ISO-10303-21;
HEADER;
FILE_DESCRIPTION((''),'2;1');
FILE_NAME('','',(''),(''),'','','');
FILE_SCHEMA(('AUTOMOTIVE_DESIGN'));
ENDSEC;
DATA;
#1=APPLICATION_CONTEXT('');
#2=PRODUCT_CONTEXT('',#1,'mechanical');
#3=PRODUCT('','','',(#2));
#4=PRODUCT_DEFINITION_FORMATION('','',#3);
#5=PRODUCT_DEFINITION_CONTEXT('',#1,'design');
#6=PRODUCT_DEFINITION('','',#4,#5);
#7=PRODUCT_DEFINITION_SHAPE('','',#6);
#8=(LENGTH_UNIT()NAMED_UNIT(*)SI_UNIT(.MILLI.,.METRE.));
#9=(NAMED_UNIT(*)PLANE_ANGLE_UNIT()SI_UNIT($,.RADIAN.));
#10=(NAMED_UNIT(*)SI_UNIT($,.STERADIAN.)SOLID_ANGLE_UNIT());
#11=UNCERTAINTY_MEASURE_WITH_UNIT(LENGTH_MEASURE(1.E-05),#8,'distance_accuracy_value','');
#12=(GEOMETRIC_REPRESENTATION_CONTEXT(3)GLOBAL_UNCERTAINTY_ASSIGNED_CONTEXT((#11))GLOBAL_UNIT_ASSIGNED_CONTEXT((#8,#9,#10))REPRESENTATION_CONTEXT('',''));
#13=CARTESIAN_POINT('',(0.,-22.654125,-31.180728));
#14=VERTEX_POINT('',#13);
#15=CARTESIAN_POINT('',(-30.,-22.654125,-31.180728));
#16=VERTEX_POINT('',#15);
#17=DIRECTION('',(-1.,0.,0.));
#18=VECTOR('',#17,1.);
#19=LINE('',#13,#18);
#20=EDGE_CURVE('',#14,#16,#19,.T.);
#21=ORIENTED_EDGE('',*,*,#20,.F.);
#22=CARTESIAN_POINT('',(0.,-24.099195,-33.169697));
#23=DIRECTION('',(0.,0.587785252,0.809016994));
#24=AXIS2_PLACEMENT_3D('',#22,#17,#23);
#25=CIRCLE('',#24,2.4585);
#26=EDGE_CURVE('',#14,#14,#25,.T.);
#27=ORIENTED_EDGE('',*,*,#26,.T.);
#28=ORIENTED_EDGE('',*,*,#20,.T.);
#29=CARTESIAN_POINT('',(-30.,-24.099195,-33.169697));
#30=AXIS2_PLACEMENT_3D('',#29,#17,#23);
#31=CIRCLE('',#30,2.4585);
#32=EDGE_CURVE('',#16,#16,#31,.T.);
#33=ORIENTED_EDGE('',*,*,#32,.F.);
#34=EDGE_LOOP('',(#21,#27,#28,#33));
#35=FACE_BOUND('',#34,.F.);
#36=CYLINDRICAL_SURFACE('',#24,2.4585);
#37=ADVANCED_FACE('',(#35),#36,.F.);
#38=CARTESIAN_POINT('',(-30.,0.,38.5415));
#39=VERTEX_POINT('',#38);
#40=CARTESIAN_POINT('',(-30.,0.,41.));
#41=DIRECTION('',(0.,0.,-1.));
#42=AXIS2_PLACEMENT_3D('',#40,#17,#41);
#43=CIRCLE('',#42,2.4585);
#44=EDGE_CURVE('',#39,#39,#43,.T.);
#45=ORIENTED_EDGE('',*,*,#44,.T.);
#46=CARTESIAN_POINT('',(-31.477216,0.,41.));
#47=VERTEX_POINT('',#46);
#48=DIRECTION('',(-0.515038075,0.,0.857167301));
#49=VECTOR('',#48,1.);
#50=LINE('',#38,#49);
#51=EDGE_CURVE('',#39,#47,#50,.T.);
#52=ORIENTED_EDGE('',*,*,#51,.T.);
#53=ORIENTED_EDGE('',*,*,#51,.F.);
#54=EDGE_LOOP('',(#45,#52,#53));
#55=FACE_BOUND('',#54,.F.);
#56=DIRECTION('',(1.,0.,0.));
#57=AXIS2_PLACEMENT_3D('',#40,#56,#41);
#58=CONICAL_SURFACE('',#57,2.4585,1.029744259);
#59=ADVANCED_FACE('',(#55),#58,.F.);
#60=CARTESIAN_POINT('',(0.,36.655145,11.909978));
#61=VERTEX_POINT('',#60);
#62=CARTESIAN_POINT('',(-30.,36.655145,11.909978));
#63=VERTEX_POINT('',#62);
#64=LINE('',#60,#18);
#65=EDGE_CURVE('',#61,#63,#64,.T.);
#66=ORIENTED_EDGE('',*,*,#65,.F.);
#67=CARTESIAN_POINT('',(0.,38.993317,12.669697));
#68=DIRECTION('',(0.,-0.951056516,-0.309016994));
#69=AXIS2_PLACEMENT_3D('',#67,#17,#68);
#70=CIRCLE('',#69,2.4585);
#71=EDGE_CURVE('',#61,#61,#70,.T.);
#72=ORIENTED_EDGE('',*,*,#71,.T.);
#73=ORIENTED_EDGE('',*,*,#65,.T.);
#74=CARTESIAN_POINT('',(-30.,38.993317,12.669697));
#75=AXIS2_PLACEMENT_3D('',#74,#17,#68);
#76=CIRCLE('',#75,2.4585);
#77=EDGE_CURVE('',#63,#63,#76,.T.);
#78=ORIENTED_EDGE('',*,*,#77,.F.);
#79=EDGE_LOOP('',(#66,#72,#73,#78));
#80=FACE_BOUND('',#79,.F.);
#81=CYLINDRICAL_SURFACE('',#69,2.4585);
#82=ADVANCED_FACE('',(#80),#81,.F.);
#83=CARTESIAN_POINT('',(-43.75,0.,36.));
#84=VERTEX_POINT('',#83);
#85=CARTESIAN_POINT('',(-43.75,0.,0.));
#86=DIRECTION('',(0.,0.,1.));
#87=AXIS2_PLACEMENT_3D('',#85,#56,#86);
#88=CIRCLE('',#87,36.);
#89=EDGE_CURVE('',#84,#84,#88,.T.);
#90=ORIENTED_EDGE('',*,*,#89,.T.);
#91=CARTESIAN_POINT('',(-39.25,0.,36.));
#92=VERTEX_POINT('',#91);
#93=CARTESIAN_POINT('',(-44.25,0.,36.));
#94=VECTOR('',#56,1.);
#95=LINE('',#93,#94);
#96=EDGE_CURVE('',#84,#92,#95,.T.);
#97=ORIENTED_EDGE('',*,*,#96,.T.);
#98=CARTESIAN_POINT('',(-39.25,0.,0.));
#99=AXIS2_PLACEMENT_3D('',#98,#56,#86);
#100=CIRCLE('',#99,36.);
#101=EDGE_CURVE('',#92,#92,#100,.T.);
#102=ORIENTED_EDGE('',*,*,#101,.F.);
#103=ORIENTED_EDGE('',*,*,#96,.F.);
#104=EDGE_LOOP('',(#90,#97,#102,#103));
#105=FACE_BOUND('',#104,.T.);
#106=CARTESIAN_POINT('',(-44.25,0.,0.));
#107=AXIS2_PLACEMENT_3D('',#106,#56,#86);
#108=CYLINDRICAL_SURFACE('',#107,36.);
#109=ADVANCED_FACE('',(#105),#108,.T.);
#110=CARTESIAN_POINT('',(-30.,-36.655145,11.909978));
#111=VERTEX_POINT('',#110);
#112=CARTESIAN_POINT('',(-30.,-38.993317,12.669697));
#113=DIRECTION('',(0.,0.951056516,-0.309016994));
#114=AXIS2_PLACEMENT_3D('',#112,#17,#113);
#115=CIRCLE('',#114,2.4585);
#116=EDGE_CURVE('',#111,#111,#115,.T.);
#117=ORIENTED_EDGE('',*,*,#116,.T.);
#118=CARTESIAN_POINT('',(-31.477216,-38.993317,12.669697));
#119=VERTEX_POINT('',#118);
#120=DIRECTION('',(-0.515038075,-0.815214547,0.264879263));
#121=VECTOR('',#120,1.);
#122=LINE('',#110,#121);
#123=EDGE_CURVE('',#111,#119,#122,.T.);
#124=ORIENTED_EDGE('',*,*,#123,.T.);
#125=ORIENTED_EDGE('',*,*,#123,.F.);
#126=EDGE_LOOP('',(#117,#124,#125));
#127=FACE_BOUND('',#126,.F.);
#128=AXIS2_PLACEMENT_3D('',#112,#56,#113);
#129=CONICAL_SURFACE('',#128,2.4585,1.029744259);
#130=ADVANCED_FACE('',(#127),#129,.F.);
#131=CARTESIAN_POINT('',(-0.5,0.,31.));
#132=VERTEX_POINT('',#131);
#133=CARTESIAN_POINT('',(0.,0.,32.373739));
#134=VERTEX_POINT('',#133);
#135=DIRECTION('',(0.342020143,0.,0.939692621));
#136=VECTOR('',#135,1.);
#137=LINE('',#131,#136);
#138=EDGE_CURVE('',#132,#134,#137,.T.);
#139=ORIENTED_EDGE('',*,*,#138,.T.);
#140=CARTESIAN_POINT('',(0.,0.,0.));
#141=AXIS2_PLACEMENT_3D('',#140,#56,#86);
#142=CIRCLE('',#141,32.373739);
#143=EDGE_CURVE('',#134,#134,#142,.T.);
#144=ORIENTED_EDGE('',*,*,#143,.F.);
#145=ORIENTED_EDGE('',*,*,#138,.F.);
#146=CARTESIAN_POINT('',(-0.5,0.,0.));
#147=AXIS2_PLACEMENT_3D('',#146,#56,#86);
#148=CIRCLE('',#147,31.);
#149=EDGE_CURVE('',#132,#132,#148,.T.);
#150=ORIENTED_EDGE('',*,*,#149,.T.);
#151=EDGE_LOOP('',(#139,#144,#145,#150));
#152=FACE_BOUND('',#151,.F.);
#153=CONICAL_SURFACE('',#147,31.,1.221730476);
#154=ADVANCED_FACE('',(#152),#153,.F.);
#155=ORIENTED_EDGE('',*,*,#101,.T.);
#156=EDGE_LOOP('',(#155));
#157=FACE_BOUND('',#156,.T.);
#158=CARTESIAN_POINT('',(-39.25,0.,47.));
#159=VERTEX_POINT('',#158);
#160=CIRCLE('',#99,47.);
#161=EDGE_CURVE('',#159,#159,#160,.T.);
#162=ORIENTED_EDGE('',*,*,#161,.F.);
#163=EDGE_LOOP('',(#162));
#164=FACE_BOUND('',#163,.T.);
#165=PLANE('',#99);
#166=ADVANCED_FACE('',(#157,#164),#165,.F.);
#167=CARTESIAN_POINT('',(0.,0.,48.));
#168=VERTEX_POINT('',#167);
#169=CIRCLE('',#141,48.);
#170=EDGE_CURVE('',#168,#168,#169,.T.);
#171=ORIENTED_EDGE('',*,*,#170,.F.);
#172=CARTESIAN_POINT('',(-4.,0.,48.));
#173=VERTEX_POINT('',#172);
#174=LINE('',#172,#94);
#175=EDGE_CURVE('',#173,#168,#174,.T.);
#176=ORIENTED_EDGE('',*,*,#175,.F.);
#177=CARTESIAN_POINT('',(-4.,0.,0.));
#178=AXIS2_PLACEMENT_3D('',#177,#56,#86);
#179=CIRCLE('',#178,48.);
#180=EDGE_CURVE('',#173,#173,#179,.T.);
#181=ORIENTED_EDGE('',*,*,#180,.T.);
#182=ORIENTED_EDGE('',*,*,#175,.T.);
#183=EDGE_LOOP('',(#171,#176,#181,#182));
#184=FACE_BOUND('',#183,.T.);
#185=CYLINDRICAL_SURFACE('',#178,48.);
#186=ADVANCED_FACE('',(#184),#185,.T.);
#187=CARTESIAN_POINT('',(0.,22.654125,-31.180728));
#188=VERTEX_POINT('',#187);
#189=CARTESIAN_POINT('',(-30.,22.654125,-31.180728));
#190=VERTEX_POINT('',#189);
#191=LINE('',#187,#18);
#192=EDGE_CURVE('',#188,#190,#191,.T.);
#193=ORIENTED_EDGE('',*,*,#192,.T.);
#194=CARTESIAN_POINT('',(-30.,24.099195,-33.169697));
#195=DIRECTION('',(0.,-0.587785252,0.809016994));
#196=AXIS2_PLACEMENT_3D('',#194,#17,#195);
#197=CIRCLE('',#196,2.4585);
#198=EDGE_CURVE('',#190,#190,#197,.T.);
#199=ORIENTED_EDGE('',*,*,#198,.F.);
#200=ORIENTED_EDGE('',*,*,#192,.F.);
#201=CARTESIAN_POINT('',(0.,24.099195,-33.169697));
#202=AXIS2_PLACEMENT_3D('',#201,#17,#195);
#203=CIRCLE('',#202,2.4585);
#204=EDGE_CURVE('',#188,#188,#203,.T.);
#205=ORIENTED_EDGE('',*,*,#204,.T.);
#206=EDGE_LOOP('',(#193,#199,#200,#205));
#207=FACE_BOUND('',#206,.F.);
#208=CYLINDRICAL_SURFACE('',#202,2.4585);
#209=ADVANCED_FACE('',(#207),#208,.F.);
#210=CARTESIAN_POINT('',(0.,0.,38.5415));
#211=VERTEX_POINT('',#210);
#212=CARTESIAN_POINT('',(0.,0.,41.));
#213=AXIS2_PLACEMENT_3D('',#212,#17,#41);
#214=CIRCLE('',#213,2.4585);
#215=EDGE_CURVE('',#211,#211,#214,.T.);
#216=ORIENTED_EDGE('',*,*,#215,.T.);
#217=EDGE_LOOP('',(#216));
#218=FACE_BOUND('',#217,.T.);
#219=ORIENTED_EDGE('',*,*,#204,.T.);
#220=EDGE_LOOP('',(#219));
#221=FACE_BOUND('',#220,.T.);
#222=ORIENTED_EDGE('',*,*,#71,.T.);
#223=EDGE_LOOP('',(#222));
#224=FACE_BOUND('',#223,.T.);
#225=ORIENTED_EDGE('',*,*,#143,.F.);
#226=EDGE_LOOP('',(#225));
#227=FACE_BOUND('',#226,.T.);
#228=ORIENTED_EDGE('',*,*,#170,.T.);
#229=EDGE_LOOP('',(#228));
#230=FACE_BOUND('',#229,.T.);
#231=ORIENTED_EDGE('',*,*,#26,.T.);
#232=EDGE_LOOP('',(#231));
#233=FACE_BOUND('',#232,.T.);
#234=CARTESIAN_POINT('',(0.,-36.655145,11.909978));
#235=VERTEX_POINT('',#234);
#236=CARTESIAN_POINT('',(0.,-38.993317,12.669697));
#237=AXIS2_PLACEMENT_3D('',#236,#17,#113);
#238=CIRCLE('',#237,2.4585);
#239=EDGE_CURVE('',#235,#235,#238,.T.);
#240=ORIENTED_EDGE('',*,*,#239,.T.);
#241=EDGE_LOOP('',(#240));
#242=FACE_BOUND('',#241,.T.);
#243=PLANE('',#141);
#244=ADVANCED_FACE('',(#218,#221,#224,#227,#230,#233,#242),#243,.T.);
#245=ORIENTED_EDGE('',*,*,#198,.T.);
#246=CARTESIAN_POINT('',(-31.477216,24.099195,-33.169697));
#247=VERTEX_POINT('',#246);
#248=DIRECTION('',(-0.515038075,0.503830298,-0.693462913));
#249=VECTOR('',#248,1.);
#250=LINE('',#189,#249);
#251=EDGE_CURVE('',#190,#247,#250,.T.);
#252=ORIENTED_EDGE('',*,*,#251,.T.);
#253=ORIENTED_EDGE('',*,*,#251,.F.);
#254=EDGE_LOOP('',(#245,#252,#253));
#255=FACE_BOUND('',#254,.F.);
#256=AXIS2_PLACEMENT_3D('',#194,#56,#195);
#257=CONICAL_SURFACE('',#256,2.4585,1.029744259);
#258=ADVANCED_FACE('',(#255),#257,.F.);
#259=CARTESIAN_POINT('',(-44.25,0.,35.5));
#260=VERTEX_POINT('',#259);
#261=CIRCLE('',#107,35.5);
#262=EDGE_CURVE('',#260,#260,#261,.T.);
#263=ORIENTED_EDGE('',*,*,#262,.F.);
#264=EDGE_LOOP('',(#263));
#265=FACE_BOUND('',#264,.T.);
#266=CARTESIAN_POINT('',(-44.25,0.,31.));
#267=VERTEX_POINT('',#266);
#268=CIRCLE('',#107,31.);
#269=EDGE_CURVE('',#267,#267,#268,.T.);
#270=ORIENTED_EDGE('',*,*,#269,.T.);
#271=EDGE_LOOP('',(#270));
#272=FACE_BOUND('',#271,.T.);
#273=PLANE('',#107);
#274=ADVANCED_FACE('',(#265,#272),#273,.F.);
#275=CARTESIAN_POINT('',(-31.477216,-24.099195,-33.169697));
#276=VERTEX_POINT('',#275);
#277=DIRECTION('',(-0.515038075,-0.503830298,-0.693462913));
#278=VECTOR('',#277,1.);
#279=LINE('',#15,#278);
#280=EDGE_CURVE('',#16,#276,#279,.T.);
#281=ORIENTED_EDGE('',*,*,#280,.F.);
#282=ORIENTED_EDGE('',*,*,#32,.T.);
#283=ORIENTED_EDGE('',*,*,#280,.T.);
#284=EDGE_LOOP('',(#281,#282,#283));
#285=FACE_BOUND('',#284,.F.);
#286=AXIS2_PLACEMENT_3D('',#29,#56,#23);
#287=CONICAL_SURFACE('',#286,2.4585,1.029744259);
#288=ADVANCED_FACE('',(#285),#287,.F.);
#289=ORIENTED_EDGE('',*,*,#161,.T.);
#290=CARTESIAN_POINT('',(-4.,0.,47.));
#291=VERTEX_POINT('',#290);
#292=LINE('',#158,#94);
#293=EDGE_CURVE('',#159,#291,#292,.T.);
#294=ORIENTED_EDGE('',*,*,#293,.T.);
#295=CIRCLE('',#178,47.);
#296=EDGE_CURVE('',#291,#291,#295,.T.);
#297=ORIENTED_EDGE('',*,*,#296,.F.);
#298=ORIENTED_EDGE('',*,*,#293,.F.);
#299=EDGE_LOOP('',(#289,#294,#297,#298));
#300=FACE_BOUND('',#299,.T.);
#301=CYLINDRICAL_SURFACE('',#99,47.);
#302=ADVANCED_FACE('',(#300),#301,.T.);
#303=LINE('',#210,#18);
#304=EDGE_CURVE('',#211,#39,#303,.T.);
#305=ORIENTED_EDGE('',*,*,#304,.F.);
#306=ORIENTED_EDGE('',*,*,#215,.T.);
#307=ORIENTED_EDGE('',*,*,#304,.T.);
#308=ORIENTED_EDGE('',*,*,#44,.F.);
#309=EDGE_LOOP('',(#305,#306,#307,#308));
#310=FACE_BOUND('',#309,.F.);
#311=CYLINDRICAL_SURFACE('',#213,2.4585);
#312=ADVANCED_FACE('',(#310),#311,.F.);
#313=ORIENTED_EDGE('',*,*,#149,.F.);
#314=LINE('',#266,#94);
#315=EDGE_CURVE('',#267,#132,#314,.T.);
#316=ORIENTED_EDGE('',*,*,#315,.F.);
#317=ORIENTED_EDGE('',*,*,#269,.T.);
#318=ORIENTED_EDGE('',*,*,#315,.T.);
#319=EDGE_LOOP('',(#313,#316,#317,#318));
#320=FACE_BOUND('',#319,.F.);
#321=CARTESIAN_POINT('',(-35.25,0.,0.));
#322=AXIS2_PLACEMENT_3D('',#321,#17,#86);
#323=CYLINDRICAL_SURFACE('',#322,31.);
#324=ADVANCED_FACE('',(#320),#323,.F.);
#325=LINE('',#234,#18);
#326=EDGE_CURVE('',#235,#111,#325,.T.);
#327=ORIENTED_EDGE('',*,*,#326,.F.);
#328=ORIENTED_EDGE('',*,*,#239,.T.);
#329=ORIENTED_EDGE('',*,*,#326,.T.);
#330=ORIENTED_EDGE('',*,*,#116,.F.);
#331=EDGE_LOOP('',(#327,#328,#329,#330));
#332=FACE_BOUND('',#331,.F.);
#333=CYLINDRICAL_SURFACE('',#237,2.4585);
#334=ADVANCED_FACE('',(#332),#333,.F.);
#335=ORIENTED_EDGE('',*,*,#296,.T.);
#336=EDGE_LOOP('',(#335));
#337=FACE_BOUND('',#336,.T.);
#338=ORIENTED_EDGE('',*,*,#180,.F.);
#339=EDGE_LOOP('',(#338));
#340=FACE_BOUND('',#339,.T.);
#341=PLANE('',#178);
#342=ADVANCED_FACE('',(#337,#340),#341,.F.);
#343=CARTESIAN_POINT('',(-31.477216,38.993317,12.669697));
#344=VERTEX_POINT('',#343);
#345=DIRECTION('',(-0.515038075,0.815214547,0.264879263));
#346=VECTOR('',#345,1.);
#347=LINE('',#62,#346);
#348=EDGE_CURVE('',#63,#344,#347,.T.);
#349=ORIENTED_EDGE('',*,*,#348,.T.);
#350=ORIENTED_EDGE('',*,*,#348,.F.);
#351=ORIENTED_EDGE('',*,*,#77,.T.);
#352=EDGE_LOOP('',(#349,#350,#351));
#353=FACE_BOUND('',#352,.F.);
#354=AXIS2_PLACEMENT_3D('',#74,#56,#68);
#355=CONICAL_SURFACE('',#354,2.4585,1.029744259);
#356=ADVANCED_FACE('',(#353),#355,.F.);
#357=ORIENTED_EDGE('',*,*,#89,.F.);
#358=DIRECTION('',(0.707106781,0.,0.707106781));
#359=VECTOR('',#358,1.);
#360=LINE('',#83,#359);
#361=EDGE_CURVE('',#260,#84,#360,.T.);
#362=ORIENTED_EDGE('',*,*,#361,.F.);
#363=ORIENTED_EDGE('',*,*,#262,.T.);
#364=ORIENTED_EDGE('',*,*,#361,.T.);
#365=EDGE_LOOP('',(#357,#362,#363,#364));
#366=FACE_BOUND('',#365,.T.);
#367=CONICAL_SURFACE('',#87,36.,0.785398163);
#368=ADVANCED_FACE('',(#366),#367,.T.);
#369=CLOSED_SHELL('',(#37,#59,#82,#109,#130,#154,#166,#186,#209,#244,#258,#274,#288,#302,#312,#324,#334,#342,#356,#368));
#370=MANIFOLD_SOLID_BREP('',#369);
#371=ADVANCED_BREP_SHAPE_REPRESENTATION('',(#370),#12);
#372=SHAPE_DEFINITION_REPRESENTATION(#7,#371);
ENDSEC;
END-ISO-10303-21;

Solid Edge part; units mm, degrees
sketch "Sketch1" plane through (0, 0, 0) normal (0, -1, 0) x (1, 0, 0)
  line L0 (0, 31) -> (-35.25, 31)
  line L1 (-35.25, 31) -> (-44.25, 31)
  line L2 (-44.25, 31) -> (-44.25, 36)
  line L3 (-44.25, 36) -> (-39.25, 36)
  line L4 (-39.25, 36) -> (-39.25, 47)
  line L5 (-39.25, 47) -> (-4, 47)
  line L6 (-4, 47) -> (-4, 48)
  line L7 (-4, 48) -> (0, 48)
  line L8 (0, 48) -> (0, 31)
revolve "RevolvedProtrusion1" add sketch "Sketch1" angle 360 about axis through (0, 0, 0) along (1, 0, 0)
chamfer "Chamfer_2" [suppressed]
chamfer "Chamfer_3" distance 0.5 angle 45 1 edges at (-44.25, 0, -36)
hole "Hole_16" at (0, 0, 41) direction (-1, 0, 0) diameter 4.917 depth 30 tip angle 118 thread major 6 thread length 20
pattern_circular "Pattern_3" count 5 over 360 about axis through (0, 0, 0) along (-1, 0, 0) of "Hole_16"
chamfer "Chamfer_4" distance 0.5 angle 70 1 edges at (0, 0, -31) measured on face at (-7.8175, -25.8206, 17.1551)
